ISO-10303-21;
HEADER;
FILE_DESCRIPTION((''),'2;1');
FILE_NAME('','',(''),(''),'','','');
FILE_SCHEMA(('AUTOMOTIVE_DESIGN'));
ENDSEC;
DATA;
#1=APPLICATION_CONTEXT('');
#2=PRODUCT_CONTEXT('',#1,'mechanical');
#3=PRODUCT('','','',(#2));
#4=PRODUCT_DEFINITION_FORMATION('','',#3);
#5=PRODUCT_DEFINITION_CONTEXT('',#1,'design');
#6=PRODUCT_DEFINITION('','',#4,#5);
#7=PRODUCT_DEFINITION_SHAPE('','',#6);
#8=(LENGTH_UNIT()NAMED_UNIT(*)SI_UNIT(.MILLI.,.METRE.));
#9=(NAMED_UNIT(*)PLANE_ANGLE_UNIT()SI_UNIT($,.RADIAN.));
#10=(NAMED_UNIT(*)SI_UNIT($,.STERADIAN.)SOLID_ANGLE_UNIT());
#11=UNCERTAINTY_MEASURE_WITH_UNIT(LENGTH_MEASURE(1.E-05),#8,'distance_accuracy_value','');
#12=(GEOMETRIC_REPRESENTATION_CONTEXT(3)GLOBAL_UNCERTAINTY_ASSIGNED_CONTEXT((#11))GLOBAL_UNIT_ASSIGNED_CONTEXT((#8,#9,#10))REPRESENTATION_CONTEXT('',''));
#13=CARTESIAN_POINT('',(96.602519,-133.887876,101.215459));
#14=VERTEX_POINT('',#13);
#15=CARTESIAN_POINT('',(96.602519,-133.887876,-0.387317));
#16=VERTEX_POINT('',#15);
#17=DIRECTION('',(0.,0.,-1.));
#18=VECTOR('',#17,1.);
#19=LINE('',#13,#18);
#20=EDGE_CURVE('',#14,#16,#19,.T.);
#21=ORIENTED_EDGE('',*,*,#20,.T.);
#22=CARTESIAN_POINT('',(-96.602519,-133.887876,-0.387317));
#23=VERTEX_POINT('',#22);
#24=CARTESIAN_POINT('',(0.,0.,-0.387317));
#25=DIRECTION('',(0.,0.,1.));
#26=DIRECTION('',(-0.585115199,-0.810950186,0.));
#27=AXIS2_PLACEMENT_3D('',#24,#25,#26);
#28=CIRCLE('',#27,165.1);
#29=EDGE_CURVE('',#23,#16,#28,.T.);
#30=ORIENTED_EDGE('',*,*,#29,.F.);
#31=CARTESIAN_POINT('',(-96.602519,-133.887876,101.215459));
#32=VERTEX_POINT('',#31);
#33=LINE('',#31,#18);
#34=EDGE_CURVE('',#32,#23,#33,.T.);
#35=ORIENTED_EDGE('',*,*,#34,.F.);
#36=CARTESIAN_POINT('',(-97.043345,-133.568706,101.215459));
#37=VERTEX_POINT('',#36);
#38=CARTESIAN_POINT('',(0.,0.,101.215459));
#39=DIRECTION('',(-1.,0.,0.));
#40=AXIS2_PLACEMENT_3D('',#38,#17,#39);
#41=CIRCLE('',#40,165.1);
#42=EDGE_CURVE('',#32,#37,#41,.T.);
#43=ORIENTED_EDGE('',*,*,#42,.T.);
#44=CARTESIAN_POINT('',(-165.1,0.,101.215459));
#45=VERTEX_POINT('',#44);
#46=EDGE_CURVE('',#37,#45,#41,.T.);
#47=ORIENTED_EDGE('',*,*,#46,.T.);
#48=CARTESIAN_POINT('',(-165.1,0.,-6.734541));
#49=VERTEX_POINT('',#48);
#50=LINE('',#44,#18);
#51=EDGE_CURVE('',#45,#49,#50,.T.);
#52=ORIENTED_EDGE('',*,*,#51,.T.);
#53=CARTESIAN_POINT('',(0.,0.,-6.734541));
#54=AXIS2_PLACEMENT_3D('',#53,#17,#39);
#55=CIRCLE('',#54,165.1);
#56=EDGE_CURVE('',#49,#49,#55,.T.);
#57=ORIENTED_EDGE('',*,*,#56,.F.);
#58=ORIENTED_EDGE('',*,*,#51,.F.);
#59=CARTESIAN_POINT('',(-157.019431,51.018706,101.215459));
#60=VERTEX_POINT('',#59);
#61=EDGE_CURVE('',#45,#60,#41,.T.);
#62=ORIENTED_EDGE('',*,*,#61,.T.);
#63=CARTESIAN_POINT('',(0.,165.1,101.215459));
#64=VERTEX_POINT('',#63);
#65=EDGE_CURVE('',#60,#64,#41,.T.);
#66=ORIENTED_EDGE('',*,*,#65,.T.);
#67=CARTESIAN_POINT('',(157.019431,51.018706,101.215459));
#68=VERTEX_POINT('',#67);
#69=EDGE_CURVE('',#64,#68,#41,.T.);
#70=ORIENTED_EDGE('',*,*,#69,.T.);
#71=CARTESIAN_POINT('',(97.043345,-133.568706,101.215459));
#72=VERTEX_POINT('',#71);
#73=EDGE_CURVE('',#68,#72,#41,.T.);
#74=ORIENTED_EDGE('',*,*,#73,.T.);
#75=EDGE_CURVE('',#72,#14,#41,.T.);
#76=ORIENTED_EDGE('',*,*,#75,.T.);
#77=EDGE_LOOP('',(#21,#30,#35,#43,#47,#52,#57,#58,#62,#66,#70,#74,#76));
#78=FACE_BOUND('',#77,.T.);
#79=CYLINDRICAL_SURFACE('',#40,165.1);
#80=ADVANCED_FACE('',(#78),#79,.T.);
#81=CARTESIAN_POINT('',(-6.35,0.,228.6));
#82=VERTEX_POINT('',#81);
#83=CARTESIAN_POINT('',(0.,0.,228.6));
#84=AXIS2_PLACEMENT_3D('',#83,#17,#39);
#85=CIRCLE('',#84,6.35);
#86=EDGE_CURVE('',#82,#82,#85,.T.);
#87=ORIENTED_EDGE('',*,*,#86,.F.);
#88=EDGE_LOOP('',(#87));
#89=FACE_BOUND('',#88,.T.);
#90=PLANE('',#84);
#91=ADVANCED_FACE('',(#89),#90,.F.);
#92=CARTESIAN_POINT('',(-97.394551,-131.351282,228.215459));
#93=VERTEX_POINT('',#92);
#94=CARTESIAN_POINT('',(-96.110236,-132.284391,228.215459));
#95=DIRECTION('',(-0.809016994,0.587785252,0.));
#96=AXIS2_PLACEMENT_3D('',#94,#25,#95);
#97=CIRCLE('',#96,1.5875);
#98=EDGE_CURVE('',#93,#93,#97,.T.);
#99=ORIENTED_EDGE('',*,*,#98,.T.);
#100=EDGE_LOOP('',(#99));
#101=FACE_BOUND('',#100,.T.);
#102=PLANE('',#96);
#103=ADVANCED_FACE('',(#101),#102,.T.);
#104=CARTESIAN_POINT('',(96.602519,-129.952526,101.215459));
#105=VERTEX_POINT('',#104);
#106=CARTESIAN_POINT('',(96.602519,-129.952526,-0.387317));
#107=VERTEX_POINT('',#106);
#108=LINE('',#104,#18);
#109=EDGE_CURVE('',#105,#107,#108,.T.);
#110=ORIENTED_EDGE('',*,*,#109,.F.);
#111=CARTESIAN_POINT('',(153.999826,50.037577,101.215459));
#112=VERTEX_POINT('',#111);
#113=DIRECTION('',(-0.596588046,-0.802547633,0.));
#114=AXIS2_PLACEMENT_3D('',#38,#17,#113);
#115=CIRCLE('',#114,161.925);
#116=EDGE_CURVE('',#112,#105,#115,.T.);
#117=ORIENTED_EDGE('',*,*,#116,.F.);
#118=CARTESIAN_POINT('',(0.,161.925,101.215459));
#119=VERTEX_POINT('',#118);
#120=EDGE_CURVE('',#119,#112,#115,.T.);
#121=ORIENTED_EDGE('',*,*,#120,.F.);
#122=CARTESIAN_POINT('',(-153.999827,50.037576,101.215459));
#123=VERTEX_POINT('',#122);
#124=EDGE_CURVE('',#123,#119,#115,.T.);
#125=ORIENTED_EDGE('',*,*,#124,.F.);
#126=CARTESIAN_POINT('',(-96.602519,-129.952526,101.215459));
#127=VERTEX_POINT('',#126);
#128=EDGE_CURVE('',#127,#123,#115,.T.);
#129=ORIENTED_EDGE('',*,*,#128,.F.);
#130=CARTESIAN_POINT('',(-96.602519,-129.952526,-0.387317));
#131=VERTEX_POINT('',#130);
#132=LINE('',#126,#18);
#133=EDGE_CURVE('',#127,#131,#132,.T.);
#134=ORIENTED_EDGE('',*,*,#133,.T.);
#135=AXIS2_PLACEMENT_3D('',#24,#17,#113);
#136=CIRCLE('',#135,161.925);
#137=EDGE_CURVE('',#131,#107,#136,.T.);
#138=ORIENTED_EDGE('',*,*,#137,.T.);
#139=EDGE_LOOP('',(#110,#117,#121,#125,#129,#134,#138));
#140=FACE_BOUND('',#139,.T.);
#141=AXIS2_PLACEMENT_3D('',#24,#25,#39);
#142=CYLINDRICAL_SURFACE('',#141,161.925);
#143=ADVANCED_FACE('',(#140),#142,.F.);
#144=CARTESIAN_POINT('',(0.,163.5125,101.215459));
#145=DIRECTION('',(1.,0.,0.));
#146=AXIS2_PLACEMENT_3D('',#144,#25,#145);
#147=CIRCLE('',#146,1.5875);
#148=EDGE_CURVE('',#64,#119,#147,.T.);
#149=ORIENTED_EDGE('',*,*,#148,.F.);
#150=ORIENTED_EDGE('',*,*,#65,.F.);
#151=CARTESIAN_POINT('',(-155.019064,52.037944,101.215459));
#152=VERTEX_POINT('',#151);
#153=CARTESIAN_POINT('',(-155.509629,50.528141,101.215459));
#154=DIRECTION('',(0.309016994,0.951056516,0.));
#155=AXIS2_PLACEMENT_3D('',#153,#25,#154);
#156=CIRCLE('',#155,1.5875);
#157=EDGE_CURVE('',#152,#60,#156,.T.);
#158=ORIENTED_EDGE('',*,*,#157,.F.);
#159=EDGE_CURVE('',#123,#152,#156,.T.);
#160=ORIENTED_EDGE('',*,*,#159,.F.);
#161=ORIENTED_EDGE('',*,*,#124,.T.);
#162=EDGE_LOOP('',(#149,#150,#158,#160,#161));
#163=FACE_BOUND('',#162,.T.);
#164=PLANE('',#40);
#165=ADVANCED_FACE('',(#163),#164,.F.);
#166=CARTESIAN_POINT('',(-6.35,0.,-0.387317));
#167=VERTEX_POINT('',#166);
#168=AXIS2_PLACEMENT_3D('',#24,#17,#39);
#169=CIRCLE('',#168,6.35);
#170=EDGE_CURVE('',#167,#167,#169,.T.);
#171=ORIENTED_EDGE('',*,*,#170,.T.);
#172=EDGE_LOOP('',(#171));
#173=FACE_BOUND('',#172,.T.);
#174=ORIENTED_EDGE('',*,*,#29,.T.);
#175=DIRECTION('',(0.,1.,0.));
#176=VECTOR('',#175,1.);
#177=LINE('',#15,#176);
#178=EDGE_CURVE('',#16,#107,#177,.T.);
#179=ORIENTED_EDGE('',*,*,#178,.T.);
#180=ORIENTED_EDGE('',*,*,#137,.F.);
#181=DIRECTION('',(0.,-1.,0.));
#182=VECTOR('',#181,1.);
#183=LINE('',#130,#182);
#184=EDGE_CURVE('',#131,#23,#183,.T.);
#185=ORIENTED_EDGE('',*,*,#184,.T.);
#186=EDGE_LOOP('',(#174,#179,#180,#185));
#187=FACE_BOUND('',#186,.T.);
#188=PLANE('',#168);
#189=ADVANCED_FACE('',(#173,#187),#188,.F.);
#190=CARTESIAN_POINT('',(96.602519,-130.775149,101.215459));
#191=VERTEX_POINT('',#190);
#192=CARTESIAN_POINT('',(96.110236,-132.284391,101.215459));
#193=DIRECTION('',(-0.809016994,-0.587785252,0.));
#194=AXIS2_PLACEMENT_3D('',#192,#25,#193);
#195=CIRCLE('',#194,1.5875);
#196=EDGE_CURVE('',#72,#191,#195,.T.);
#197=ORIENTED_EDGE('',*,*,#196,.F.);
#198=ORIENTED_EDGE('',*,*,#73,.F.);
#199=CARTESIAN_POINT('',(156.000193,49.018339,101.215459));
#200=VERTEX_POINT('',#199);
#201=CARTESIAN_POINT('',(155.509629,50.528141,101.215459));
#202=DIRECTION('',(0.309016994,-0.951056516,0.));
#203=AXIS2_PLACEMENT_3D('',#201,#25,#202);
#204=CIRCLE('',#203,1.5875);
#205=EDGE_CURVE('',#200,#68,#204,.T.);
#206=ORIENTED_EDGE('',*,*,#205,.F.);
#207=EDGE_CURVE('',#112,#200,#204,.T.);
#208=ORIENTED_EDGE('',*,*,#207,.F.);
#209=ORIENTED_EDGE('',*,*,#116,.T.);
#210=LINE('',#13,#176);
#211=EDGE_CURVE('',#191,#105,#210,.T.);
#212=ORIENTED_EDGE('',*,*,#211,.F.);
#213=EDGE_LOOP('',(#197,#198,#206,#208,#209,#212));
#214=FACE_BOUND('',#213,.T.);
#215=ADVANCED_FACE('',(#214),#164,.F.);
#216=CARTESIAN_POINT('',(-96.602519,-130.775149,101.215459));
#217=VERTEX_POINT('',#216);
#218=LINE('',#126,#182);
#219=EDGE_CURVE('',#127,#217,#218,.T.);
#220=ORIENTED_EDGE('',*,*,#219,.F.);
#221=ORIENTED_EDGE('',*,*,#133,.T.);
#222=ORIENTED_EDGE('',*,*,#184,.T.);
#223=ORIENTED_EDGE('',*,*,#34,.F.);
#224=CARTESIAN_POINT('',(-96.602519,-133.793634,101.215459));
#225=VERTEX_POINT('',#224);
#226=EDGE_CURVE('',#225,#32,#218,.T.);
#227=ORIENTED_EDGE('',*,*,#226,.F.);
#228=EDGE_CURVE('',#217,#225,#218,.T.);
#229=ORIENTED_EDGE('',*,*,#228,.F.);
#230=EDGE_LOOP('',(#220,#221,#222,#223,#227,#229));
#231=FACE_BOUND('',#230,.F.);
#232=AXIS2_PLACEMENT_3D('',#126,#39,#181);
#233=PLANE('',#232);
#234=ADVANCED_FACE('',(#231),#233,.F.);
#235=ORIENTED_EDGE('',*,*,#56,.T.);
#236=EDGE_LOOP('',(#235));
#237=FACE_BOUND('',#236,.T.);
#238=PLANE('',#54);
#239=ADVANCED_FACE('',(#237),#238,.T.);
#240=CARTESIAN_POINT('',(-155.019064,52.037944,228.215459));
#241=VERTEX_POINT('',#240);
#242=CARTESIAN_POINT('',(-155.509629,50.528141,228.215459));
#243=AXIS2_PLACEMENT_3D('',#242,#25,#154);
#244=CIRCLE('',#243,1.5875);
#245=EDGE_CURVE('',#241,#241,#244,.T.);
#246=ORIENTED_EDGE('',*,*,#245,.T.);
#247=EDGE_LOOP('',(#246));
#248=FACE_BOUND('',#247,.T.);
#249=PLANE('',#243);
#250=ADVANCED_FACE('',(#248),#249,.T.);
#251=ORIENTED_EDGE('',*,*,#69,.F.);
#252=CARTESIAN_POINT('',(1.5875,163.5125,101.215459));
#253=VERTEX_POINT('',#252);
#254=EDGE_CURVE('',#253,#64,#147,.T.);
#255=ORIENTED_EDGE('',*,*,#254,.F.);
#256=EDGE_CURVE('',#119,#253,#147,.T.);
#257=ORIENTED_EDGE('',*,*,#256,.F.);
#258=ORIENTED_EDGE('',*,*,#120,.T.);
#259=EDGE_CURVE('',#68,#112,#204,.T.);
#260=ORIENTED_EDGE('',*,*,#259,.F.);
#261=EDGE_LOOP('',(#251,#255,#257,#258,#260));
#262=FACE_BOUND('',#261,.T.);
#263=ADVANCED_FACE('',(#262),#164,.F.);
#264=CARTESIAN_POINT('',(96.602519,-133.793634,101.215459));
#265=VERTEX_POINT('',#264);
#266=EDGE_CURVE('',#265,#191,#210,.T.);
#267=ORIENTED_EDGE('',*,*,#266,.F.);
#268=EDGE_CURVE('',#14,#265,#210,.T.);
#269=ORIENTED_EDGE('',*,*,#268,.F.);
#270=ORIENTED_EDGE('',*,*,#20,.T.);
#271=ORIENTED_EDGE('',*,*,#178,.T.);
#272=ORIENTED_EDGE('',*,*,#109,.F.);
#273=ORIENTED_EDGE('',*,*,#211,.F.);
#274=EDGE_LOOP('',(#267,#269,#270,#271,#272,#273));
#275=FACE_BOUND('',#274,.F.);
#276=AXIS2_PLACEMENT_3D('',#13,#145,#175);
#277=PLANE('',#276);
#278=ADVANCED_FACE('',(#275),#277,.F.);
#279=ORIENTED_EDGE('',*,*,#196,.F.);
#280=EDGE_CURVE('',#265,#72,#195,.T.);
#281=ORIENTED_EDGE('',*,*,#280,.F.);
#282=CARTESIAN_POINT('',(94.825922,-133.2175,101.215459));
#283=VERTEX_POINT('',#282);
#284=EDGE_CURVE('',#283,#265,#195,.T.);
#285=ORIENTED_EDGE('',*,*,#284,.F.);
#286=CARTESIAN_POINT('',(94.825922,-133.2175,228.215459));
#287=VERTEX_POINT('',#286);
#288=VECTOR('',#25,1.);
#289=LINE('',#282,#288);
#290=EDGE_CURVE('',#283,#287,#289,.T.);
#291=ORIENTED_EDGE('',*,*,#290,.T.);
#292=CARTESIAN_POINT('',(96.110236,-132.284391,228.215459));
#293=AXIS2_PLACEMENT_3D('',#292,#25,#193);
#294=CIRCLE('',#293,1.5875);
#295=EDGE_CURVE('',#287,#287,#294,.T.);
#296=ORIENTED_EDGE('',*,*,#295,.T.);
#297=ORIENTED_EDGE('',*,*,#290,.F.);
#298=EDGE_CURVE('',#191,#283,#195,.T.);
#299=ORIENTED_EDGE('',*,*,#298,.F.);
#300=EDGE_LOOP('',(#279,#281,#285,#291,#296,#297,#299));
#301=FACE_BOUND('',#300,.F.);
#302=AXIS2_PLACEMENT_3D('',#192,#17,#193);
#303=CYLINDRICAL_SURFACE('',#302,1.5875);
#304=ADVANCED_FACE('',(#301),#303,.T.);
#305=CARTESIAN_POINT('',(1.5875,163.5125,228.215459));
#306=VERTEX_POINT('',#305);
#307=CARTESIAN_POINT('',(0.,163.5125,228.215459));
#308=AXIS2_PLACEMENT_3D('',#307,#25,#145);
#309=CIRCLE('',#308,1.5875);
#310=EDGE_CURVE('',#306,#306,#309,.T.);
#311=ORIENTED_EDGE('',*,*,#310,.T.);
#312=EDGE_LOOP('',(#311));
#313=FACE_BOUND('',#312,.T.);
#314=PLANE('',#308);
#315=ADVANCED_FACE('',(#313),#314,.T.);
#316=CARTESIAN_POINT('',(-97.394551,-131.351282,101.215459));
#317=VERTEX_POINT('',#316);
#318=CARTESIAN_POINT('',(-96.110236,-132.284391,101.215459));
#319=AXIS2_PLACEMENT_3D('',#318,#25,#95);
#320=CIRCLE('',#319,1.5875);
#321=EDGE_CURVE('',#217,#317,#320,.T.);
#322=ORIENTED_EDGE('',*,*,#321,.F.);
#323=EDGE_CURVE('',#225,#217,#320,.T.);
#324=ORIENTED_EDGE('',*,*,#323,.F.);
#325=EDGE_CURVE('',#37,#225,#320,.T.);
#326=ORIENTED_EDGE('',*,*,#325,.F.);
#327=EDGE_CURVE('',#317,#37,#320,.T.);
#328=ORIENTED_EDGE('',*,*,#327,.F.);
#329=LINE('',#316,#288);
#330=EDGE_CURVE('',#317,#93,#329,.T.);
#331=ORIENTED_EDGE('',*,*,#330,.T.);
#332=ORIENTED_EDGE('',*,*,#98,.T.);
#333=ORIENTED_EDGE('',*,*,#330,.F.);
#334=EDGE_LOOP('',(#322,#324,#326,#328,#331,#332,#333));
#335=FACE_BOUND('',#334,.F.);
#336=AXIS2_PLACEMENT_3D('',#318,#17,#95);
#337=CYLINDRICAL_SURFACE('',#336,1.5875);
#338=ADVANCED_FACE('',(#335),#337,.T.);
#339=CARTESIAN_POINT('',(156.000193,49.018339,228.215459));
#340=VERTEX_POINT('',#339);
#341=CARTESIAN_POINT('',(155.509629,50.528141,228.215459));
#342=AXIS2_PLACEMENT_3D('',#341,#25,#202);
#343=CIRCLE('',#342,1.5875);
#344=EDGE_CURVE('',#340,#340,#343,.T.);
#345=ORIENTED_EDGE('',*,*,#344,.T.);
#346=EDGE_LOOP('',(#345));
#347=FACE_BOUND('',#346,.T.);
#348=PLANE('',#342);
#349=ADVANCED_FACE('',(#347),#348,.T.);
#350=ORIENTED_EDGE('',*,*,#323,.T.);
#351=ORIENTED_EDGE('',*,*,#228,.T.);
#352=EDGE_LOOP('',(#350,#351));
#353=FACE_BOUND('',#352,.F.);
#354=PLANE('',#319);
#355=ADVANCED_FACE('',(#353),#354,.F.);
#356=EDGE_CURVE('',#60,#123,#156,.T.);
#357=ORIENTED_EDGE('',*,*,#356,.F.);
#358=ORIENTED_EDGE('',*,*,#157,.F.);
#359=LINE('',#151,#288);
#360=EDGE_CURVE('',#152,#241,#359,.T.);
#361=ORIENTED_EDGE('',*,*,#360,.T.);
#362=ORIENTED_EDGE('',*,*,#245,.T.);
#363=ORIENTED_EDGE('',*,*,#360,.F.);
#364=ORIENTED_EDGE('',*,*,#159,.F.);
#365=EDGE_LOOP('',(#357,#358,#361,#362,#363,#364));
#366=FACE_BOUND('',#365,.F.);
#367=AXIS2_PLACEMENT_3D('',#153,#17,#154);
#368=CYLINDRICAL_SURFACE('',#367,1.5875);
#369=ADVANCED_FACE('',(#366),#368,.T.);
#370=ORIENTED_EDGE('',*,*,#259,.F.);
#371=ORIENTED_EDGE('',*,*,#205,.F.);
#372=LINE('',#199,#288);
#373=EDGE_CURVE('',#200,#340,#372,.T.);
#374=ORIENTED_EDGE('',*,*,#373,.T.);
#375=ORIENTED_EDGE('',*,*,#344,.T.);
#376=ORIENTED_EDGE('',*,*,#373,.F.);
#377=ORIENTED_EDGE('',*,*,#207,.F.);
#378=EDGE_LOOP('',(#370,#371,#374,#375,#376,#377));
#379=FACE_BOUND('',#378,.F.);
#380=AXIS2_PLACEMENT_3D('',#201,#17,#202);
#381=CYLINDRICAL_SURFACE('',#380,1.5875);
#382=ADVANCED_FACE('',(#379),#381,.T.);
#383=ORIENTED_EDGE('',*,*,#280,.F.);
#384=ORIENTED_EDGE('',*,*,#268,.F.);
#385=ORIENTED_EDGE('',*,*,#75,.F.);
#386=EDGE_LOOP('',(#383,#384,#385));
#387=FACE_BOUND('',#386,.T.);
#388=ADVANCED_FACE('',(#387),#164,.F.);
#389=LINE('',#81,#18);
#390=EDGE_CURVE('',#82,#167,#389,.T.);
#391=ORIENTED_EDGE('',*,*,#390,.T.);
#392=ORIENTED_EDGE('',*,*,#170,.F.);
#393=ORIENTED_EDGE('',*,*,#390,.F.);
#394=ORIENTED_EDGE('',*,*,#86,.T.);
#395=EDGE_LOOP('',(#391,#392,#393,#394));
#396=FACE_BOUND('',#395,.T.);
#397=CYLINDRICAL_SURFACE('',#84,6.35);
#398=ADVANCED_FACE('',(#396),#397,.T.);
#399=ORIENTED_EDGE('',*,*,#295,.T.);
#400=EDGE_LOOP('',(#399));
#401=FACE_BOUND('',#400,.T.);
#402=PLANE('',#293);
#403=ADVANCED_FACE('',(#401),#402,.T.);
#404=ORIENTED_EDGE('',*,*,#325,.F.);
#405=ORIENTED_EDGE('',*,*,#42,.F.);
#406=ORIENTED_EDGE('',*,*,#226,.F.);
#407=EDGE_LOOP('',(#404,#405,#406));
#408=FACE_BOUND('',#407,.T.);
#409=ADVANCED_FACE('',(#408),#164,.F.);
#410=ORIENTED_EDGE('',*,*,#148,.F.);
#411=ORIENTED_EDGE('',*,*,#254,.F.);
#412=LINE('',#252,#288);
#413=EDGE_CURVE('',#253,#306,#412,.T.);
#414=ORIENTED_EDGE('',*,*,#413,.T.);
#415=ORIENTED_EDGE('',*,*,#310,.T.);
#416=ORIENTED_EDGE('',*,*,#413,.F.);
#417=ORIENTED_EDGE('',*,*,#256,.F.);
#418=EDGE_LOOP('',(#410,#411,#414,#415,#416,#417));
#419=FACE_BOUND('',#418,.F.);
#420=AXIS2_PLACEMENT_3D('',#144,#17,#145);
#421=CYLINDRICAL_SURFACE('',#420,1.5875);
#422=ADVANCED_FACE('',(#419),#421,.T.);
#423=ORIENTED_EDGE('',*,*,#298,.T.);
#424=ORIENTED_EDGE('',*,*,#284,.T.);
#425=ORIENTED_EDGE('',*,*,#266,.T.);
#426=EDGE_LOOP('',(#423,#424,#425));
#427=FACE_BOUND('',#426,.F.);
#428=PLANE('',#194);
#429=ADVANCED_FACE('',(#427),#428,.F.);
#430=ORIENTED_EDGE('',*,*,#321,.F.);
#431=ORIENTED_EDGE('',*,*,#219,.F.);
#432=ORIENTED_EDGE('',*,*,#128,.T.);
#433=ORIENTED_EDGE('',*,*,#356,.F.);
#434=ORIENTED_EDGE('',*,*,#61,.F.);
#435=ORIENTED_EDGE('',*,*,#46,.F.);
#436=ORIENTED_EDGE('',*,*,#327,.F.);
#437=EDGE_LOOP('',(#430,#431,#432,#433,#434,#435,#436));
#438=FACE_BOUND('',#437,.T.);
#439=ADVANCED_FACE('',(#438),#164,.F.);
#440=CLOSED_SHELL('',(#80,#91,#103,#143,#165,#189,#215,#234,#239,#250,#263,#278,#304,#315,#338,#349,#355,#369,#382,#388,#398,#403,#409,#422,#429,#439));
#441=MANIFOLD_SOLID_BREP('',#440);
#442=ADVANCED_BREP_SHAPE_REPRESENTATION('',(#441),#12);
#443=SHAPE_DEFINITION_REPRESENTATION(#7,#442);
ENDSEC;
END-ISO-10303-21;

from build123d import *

# Parameters (mm, degrees)
F4_DEPTH        = 101.6027760721
F5_R            = 1.5875
F6_DEPTH        = 127
F6_COPIES_COUNT = 5


# Not quite as in the source:
# - a pattern or mirror of a feature is missing from the dataset's text; its kind, count and spacing are read off the source's solid


with BuildPart() as f2:
    # F1 (on Front) → F2 (revolve)
    with BuildSketch(Plane.XZ):
        Polygon((-161.925, 101.2154587421), (-165.1, 101.2154587421), (-165.1, -0.3845412579), (-165.1, -6.7345412579), (0, -6.7345412579), (0, 0), (0, 228.6), (-6.35, 228.6), (-6.35, -0.3873173299), (-161.925, -0.3873173299), align=None)
    revolve(axis=Axis((0, 0, 5.5167637765), (0, 0, -1)))

    # F3 (on face) → F4 (cut, through all)
    with BuildSketch(Plane.XY.offset(101.2154587421)):
        with BuildLine():
            ThreePointArc((96.6025192728, -129.9525255435), (0, -161.925), (-96.6025192728, -129.9525255435))
            Line((-96.6025192728, -129.9525255435), (-96.6025192728, -133.8878757399))
            ThreePointArc((-96.6025192728, -133.8878757399), (0, -165.1), (96.6025192728, -133.8878757399))
            Line((96.6025192728, -133.8878757399), (96.6025192728, -129.9525255435))
        make_face()
    extrude(amount=-F4_DEPTH, mode=Mode.SUBTRACT)

    # F5 (on face) → F6 (join)
    with BuildSketch(Plane.XY.offset(101.2154587421)):
        with Locations((0, 163.5125)):
            Circle(F5_R)
    f6 = extrude(amount=F6_DEPTH)

    # F6_copies: F6 ×5 about axis
    f6_copies_axis = Axis((0, 0, 0), (0, 0, 1))
    for i in range(1, F6_COPIES_COUNT):
        add(f6.rotate(f6_copies_axis, i * 360 / F6_COPIES_COUNT))


solid = f2.part
